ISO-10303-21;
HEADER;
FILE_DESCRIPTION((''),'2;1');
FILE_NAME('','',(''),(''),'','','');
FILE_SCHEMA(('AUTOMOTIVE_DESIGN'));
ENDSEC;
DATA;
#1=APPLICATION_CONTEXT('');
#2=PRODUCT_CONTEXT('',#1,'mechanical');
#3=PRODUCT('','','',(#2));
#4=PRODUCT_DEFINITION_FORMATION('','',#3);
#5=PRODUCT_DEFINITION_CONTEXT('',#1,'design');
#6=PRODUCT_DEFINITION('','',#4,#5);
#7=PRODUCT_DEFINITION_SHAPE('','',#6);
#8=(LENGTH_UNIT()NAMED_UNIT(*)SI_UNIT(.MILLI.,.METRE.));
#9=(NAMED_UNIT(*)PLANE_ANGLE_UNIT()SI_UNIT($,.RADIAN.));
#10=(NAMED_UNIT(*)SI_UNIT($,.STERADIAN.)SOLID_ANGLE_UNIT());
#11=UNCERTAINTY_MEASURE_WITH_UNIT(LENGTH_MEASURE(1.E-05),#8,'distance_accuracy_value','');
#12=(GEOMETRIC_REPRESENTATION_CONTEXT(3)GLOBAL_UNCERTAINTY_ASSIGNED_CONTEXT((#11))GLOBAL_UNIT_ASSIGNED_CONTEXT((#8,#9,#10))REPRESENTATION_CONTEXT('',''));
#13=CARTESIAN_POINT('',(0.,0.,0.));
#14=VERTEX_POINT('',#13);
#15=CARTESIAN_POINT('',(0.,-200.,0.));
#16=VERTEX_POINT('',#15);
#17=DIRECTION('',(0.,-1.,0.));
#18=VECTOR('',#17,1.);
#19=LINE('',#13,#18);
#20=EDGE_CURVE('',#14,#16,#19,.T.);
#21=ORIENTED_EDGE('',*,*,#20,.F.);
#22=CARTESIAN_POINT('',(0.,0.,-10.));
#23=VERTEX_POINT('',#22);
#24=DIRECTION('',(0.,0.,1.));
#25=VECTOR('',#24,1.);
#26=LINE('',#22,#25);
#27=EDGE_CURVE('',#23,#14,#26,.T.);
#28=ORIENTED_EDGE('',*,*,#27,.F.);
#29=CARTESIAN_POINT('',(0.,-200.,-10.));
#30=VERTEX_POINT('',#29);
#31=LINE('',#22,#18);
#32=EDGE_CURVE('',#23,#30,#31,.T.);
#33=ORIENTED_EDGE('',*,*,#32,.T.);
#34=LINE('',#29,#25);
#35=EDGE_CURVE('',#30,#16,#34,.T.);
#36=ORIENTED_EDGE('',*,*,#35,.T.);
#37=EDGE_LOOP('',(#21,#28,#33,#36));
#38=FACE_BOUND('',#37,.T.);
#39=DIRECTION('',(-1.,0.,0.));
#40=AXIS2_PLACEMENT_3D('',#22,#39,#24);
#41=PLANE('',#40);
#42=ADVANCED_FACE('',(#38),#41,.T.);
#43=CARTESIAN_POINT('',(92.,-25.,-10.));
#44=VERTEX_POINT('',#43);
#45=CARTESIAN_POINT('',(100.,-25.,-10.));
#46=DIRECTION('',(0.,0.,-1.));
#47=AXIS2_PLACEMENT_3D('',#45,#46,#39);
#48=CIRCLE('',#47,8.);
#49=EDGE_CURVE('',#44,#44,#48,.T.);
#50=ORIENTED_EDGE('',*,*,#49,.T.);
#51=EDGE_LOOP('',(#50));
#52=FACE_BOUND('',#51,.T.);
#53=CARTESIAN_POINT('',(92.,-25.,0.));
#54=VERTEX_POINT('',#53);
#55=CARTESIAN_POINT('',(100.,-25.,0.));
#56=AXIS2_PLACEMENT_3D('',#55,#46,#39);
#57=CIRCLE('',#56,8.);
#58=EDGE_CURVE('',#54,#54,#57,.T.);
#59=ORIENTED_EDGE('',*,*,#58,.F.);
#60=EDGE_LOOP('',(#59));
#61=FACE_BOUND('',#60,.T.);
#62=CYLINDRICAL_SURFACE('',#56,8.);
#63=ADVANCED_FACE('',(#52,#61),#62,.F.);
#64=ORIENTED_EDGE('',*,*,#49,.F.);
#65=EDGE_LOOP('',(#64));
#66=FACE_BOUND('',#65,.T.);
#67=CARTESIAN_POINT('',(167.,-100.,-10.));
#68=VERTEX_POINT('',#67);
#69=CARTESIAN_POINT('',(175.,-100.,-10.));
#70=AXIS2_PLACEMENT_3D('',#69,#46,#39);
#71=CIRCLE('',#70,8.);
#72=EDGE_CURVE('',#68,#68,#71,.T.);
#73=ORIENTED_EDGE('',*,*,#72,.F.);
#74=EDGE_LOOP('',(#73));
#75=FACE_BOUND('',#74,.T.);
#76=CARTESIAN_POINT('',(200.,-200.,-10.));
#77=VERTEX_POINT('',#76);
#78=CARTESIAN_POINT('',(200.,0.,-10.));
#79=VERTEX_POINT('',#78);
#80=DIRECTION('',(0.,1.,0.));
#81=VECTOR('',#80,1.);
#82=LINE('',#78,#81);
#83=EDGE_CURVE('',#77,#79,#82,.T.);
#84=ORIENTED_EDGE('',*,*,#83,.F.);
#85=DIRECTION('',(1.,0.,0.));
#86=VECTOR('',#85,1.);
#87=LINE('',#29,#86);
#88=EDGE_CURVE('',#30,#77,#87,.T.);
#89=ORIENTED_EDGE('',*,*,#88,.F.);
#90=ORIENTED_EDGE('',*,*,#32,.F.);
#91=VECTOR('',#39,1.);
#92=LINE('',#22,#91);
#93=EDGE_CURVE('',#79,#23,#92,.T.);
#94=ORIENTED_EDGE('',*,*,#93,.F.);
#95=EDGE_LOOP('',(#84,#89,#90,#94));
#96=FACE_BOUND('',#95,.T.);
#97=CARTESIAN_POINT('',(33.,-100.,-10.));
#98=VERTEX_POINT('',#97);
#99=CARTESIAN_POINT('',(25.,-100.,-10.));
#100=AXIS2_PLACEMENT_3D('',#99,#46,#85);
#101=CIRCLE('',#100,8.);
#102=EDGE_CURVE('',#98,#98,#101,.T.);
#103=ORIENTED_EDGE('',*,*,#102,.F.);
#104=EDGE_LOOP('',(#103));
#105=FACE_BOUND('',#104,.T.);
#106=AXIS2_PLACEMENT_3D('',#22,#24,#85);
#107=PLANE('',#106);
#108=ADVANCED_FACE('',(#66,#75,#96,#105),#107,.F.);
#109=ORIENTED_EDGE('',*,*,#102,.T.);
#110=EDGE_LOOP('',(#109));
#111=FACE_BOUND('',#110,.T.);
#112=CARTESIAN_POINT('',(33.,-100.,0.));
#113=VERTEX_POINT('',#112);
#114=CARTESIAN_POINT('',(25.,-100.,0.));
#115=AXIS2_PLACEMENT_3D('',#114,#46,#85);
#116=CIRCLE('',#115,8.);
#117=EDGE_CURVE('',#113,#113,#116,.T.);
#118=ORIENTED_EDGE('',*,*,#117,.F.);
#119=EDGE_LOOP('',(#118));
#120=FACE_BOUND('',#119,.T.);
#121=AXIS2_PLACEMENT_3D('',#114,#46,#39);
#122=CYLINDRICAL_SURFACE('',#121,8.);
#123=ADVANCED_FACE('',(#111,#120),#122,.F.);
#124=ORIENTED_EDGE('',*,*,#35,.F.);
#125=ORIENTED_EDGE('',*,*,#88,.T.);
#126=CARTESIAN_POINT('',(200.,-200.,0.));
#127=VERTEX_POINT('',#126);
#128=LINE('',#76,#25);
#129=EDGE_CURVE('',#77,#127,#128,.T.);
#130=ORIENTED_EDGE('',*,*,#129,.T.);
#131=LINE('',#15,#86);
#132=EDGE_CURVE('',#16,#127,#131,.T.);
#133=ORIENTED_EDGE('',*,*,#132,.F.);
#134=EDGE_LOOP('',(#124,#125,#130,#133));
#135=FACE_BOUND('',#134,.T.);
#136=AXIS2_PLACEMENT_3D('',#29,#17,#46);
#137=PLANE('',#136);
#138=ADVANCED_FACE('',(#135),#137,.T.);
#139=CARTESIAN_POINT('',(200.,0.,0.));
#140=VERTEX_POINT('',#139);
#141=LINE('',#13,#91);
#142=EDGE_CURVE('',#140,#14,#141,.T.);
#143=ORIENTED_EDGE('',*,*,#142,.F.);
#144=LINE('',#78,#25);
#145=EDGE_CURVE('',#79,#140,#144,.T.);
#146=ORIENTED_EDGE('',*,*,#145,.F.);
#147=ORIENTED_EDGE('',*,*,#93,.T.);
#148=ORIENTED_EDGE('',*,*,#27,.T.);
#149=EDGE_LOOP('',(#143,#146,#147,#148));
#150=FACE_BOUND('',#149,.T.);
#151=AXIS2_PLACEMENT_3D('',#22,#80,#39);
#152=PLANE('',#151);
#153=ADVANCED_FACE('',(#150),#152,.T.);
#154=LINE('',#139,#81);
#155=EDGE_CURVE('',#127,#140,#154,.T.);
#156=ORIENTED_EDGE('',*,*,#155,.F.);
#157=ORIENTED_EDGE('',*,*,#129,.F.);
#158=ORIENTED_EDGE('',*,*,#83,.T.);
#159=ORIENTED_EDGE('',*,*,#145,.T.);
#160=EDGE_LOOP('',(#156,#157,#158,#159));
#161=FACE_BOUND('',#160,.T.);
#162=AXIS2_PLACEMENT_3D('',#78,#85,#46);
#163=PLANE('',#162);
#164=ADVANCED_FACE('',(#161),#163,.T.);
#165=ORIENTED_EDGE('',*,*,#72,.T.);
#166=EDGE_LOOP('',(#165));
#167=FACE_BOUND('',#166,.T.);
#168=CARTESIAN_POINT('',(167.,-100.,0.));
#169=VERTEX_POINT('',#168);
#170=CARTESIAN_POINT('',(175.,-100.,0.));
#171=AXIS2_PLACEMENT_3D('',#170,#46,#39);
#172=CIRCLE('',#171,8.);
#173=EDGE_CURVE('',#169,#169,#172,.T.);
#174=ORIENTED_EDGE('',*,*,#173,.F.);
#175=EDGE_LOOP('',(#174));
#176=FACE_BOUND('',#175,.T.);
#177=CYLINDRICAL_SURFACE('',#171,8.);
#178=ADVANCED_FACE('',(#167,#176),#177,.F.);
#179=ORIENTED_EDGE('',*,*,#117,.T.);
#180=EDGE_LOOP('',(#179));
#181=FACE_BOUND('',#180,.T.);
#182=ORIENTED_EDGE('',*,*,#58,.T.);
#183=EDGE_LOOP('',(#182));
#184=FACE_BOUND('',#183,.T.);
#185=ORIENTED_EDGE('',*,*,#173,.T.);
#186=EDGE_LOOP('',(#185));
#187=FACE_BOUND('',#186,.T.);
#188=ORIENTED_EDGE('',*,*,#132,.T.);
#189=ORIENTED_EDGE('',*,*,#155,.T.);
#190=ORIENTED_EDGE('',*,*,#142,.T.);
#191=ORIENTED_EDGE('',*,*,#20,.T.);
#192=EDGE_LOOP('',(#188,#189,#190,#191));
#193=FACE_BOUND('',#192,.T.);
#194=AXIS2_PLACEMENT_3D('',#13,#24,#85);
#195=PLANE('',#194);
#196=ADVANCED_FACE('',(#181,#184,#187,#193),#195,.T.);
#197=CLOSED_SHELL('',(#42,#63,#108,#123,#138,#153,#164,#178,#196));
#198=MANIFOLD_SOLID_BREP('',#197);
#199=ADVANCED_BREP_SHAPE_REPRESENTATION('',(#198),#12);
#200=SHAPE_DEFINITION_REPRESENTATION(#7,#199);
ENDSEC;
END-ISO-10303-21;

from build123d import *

# Parameters (mm, degrees)
SKETCH_1_W             = 200
SKETCH_1_H             = 200
SM_BASE_FLANGE_1_DEPTH = 10
SKETCH_3_R             = 8
CUT_EXTRUDE_1_DEPTH    = 10


# Sheet-metal steps are written as plain solids
with BuildPart() as part:
    # Sketch 1 → Базовая кромка1 (new body)
    with BuildSketch(Plane.XY):
        with Locations((100, -100)):
            Rectangle(SKETCH_1_W, SKETCH_1_H)
    extrude(amount=-SM_BASE_FLANGE_1_DEPTH)

    # Эскиз3 → Вырез-Вытянуть1 (cut)
    with BuildSketch(Plane(origin=(0, 0, -10), x_dir=(-1, 0, 0), z_dir=(0, 0, -1))):
        with Locations((-175, -100)):
            Circle(SKETCH_3_R)
        with Locations((-100, -25)):
            Circle(SKETCH_3_R)
        with Locations(Location((-25, -100, 0), (0, 0, 180))):
            Circle(SKETCH_3_R)
    extrude(amount=-CUT_EXTRUDE_1_DEPTH, mode=Mode.SUBTRACT)


solid = part.part
